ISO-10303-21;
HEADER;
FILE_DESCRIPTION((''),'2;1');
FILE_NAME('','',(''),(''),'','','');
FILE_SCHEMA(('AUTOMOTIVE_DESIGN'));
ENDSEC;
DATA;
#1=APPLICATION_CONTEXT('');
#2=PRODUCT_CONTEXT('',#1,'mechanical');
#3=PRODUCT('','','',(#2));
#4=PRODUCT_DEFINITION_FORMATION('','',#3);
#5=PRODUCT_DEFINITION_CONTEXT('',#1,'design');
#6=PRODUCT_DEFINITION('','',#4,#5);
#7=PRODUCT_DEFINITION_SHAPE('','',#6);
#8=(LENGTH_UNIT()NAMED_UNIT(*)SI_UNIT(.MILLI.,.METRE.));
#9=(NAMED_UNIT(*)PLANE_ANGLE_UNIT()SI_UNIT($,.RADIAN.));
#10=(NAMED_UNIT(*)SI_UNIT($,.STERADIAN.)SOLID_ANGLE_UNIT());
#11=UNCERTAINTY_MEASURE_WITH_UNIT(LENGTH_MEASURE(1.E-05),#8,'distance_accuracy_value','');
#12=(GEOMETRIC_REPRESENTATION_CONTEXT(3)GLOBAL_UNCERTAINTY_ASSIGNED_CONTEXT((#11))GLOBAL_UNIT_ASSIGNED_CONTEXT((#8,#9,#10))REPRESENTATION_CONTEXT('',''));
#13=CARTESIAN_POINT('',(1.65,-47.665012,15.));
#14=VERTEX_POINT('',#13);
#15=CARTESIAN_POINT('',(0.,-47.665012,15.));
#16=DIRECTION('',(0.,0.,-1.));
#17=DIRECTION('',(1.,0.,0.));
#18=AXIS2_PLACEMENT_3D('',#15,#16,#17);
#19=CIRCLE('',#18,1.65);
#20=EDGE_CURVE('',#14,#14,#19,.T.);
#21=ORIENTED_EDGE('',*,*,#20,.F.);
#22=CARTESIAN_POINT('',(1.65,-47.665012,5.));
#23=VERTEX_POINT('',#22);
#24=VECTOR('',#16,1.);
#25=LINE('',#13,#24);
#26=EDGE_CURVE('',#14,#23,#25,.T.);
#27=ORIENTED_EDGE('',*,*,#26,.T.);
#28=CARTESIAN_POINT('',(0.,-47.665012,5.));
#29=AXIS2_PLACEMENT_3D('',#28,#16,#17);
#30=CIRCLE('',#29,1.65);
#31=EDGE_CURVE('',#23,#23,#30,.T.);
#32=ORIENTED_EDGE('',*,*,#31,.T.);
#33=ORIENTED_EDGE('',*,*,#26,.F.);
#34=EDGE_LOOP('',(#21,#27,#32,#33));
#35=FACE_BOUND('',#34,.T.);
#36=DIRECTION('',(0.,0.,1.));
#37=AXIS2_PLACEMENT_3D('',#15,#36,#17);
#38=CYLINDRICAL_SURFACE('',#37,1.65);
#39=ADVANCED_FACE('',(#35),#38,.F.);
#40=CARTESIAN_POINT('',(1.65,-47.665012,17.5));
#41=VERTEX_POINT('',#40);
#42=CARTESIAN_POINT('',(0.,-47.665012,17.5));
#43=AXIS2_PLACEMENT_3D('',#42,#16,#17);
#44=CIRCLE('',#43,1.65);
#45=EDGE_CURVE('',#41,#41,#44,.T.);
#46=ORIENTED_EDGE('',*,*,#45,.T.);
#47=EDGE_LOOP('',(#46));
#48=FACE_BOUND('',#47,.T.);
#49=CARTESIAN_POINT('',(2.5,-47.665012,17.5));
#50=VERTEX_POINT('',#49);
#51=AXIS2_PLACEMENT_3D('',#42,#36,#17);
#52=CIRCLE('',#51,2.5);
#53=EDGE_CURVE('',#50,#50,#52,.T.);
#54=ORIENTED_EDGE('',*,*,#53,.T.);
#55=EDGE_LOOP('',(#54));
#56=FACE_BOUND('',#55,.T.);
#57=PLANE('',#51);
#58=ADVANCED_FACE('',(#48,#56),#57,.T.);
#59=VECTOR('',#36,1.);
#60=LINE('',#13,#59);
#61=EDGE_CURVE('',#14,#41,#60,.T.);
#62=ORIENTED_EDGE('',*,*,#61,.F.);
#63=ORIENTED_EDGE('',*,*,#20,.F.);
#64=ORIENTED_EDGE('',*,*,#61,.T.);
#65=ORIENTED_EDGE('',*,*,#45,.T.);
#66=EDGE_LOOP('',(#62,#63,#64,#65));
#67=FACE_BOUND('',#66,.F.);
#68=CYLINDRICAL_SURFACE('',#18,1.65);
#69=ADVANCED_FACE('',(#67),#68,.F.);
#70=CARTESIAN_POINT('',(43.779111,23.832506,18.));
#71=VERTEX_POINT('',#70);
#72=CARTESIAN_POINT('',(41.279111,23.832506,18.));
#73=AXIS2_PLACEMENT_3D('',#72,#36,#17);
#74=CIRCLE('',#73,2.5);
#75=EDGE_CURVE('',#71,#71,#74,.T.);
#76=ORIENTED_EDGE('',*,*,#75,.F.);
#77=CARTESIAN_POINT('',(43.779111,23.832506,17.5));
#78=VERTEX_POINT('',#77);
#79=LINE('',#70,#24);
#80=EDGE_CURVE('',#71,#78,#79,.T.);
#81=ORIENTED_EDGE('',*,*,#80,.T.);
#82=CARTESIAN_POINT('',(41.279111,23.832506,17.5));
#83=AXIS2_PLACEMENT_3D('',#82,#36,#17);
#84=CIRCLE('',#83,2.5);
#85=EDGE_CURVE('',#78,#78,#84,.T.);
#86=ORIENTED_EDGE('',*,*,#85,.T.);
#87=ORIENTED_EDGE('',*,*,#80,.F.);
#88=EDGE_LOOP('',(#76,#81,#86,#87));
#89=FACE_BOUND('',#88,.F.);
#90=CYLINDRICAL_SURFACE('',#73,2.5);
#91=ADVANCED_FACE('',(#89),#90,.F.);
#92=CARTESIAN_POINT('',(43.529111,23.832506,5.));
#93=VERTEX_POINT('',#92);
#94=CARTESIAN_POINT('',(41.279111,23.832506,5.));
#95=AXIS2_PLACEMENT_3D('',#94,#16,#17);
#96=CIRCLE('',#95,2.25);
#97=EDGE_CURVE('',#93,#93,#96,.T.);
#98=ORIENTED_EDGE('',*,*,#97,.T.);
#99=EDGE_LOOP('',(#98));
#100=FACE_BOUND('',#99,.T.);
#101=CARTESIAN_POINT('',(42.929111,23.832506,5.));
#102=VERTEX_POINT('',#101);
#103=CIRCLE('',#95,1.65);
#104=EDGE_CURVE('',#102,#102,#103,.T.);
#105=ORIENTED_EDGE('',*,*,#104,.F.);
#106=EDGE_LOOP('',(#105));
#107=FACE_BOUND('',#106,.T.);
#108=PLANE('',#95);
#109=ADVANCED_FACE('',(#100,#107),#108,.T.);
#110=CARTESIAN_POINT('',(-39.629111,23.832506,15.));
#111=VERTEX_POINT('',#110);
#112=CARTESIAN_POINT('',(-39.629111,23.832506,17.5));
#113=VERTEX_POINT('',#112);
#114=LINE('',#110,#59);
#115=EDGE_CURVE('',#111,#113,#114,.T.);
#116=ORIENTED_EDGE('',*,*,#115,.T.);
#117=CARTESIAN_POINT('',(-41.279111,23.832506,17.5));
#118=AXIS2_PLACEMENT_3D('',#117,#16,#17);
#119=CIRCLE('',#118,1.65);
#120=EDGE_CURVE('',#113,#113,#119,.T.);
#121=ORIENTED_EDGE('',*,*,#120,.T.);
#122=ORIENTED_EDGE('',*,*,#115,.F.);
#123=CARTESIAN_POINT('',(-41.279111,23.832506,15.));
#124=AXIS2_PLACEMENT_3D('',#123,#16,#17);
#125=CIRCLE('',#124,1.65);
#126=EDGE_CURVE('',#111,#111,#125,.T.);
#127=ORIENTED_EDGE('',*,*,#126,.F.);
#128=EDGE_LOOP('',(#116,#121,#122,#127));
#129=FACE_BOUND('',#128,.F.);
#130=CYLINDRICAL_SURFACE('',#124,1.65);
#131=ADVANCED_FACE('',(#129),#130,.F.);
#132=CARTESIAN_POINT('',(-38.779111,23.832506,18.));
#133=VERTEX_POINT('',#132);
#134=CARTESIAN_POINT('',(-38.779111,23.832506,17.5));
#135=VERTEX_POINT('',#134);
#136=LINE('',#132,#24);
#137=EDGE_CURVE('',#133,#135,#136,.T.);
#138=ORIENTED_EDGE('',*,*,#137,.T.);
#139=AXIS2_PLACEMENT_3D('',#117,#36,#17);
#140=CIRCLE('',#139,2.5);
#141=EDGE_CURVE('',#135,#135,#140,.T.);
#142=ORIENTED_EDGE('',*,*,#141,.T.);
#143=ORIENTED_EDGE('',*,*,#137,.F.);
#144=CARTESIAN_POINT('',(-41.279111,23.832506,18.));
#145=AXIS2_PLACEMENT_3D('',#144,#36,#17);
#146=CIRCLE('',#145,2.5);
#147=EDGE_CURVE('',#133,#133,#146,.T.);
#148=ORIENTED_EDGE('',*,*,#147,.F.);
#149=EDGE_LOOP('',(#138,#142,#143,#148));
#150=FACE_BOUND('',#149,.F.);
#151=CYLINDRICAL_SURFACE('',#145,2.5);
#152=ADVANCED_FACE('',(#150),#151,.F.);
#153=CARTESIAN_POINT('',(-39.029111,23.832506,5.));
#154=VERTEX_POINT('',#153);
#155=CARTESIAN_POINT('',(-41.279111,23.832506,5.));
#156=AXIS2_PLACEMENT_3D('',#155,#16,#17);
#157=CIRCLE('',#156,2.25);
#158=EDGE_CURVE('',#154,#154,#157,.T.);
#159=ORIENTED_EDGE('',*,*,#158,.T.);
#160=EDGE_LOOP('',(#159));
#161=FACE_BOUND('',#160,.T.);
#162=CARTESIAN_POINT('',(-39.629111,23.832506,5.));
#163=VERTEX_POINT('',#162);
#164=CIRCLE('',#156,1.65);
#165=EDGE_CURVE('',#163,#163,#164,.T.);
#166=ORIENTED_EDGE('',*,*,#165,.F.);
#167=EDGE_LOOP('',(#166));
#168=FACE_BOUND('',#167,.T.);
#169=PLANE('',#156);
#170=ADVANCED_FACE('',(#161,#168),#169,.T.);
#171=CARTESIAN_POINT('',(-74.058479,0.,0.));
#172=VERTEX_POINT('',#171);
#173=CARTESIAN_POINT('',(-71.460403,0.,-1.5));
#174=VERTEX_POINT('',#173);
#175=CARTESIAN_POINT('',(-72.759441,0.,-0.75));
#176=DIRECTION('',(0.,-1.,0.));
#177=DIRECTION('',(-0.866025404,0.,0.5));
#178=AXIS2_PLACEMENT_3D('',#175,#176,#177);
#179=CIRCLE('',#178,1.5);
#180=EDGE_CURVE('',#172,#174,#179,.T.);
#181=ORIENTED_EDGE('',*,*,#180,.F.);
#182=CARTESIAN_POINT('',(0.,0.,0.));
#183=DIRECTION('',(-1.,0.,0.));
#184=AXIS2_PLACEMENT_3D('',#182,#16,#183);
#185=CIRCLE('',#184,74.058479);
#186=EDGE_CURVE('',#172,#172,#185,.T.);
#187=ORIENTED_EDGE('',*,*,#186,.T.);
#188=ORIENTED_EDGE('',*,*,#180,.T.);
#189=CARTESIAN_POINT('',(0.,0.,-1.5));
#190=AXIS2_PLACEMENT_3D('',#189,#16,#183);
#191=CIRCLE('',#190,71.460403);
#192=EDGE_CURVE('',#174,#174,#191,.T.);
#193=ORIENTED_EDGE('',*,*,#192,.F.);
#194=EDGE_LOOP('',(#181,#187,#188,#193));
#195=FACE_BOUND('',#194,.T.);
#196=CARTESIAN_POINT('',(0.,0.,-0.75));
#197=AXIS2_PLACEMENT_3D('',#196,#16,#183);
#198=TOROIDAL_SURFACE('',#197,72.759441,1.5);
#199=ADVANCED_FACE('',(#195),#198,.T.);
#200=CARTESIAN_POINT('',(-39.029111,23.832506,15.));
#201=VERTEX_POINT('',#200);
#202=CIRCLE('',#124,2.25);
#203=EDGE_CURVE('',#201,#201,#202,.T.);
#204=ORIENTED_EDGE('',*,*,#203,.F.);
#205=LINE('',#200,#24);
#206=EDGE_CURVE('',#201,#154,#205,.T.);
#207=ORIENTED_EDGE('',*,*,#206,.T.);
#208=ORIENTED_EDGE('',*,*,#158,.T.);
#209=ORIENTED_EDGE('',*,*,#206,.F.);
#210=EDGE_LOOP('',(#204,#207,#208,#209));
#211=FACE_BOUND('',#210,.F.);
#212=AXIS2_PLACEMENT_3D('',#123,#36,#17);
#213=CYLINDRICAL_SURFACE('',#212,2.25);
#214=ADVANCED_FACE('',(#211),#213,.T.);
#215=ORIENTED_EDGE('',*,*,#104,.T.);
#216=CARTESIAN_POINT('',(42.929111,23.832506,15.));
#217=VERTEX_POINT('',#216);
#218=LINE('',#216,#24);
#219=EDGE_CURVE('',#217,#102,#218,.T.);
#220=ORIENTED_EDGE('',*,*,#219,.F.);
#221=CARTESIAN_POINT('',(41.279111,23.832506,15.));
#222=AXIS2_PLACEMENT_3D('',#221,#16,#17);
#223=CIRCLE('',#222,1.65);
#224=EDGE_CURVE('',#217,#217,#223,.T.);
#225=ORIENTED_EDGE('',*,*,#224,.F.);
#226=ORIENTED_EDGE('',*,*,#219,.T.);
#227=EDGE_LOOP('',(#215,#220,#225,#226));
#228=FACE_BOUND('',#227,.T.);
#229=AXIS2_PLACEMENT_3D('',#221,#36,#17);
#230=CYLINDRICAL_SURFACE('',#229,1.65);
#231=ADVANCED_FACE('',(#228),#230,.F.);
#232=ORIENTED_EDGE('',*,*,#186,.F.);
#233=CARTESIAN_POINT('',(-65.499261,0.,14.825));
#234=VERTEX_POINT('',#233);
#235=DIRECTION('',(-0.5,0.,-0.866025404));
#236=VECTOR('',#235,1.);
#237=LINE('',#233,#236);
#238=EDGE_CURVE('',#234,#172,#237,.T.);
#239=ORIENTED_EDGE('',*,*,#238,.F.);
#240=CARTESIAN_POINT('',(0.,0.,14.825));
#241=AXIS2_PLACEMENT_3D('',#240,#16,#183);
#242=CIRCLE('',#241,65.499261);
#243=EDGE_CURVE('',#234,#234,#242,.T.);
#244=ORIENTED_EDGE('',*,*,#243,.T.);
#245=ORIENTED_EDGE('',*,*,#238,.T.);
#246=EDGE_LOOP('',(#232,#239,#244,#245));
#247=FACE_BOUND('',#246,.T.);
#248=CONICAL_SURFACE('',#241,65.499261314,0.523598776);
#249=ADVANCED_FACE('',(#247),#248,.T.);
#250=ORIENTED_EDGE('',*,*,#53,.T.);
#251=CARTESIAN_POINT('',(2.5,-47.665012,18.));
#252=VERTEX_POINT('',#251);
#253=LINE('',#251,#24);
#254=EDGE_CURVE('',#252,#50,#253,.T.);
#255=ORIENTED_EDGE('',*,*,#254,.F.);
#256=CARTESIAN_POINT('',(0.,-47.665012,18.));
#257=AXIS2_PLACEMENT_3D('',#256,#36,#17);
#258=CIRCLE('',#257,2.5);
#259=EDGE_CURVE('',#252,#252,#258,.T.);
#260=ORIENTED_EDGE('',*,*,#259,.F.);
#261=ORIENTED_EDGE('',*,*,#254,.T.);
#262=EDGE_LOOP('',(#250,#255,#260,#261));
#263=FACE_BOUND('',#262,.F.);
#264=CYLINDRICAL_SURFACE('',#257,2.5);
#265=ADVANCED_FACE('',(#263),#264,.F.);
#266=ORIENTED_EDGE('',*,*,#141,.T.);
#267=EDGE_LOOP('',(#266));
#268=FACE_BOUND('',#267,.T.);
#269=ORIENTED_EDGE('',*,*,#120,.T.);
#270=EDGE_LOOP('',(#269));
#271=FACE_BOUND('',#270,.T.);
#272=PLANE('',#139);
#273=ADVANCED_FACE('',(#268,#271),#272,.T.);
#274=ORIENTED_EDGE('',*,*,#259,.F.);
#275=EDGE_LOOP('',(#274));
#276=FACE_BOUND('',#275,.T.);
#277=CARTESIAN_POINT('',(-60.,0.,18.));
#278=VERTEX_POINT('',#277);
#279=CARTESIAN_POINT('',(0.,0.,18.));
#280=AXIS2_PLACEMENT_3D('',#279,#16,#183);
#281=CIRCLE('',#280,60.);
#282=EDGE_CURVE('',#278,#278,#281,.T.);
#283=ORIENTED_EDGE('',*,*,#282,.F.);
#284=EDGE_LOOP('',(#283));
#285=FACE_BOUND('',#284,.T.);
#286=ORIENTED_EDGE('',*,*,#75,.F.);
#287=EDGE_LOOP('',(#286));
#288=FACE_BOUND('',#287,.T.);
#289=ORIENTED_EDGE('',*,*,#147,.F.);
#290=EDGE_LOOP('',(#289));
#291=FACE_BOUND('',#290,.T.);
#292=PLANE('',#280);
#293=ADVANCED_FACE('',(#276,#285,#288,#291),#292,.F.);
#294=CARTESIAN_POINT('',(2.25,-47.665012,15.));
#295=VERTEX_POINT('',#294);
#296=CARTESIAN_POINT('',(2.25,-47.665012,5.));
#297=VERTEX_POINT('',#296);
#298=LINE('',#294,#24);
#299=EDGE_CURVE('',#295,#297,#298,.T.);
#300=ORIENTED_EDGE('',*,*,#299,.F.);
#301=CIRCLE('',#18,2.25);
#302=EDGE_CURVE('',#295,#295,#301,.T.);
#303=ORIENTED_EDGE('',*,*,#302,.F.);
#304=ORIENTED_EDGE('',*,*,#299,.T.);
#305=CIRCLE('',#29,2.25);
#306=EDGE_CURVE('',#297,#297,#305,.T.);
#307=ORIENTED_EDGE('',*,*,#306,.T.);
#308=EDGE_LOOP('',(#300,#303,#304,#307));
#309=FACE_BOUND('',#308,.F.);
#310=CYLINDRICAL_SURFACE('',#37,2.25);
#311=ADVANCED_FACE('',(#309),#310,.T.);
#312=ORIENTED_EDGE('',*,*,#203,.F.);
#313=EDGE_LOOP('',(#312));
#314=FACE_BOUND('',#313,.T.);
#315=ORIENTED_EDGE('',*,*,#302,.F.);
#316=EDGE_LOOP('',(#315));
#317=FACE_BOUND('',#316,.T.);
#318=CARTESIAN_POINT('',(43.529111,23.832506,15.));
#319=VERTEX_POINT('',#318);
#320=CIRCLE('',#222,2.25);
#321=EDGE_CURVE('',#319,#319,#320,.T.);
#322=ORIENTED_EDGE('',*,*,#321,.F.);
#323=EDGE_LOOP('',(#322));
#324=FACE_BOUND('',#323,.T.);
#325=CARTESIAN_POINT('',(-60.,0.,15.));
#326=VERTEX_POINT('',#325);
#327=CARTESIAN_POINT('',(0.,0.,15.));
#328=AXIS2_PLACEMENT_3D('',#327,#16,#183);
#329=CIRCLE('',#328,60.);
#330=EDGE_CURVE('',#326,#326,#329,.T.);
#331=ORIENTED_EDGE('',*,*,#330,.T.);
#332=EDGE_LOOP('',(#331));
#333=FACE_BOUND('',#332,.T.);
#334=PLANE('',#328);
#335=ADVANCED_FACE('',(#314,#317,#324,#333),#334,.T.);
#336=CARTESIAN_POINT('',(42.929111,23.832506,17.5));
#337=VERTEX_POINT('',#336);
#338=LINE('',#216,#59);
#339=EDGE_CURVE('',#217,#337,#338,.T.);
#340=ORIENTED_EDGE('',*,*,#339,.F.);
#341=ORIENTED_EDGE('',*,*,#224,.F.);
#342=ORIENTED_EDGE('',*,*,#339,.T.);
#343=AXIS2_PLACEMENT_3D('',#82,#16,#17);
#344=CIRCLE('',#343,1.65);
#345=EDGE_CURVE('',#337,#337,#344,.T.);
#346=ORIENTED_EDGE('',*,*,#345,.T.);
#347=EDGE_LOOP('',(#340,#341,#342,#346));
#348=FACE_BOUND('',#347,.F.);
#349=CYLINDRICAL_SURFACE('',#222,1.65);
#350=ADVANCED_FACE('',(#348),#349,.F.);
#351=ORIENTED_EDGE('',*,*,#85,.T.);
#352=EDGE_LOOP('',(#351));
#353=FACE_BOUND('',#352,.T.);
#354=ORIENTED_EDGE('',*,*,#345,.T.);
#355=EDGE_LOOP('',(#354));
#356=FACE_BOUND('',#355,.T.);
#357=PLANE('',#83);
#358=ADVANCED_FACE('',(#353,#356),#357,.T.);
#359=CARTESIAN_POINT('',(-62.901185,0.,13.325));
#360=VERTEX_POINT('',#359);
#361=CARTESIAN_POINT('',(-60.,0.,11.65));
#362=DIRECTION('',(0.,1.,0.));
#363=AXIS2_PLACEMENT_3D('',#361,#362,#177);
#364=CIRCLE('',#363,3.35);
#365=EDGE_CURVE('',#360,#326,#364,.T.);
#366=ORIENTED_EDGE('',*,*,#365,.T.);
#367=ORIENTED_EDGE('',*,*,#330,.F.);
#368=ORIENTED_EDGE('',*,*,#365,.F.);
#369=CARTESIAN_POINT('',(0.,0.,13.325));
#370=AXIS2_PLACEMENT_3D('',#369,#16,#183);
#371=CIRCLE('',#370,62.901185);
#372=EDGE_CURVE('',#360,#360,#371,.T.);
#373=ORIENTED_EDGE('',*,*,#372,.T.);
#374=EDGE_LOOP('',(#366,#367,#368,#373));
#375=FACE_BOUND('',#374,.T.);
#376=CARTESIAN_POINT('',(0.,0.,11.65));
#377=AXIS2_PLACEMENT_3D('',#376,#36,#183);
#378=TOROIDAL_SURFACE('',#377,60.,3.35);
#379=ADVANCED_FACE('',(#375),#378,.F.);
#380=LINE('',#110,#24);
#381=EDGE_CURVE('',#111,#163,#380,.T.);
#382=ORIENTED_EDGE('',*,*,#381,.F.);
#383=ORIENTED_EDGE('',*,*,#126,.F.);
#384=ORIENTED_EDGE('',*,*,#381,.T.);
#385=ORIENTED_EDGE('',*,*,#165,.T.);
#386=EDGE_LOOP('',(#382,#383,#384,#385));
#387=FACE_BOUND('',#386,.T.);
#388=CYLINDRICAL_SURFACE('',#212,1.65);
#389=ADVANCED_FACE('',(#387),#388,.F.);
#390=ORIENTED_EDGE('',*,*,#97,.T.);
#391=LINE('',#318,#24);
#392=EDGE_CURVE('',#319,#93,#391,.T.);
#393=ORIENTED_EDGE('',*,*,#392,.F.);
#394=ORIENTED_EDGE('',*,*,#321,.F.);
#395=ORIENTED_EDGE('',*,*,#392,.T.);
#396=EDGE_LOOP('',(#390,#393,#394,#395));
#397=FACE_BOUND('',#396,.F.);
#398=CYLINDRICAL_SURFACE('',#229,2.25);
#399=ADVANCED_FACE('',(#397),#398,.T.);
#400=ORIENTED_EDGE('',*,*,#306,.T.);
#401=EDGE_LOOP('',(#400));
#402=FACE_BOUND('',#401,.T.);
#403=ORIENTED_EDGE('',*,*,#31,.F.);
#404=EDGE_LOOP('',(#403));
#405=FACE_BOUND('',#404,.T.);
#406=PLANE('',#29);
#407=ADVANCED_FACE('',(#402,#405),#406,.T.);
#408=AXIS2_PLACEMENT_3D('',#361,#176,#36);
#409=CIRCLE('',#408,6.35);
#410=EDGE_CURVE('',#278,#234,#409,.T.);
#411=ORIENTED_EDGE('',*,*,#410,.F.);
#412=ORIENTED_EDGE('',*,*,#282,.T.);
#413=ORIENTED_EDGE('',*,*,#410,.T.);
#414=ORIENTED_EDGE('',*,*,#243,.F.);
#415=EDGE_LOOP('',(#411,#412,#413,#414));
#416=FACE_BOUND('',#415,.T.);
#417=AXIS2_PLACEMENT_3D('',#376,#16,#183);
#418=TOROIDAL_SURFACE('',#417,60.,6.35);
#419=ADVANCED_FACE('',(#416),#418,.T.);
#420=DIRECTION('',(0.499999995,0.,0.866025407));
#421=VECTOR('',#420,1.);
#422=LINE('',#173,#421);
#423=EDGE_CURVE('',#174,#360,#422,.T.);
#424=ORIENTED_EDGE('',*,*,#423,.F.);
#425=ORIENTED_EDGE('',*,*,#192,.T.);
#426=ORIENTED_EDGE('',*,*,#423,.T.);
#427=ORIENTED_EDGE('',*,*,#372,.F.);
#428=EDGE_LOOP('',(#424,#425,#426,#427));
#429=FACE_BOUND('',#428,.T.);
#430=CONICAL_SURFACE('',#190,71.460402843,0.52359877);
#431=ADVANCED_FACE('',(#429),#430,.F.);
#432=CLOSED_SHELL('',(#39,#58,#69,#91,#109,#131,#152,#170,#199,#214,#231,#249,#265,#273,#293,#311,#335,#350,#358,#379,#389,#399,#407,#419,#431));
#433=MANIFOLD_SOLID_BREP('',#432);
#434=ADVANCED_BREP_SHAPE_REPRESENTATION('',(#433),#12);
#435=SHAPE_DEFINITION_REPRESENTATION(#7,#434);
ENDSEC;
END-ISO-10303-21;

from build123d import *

# Parameters (mm, degrees)
F2_R     = 2.25
F2_R_2   = 1.65
F3_DEPTH = 10
F4_R     = 1.65
F5_DEPTH = 3
F6_R     = 2.5
F7_DEPTH = 0.5


# Not quite as in the source:
# - ends of sketch curves that miss each other by under 0.0002 mm in the source are joined


with BuildPart() as f1:
    # F0 (on Front) → F1 (revolve)
    with BuildSketch(Plane.XZ):
        with BuildLine():
            Line((0, 15.0000001043), (0, 18))
            Line((0, 18), (-60, 18))
            ThreePointArc((-60, 18), (-63.175, 17.149261314), (-65.499261314, 14.825))
            Line((-65.499261314, 14.825), (-74.0584790548, 0))
            ThreePointArc((-74.0584790548, 0), (-73.5094409491, -2.0490381057), (-71.4604028434, -1.5))
            Line((-71.4604028434, -1.5), (-62.901185193, 13.3250000522))
            ThreePointArc((-62.901185193, 13.3250000522), (-61.6750000522, 14.551185193), (-60, 15.0000001043))
            Line((-60, 15.0000001043), (0, 15.0000001043))
        make_face()
    revolve(axis=Axis((0, 0, 16.5000000522), (0, 0, -1)))

    # F2 (on face) → F3 (join)
    with BuildSketch(Plane(origin=(0, 0, 15.0000001043), x_dir=(1, 0, 0), z_dir=(0, 0, -1))):
        with Locations((0, 47.6650122409)):
            Circle(F2_R)
        with Locations((0, 47.6650122409)):
            Circle(F2_R_2, mode=Mode.SUBTRACT)
        with Locations((-41.2791114723, -23.8325061204)):
            Circle(F2_R)
        with Locations((-41.2791114723, -23.8325061204)):
            Circle(F2_R_2, mode=Mode.SUBTRACT)
        with Locations((41.2791114723, -23.8325061204)):
            Circle(F2_R)
        with Locations((41.2791114723, -23.8325061204)):
            Circle(F2_R_2, mode=Mode.SUBTRACT)
    extrude(amount=F3_DEPTH)

    # F4 (on face) → F5 (cut)
    with BuildSketch(Plane(origin=(0, 0, 15.0000001043), x_dir=(1, 0, 0), z_dir=(0, 0, -1))):
        with Locations((0, 47.6650122409)):
            Circle(F4_R)
        with Locations((-41.2791114723, -23.8325061204)):
            Circle(F4_R)
        with Locations((41.2791114723, -23.8325061204)):
            Circle(F4_R)
    extrude(amount=-F5_DEPTH, mode=Mode.SUBTRACT)

    # F6 (on face) → F7 (cut)
    with BuildSketch(Plane.XY.offset(18)):
        with Locations((0, -47.6650122409)):
            Circle(F6_R)
        with Locations((41.2791114723, 23.8325061204)):
            Circle(F6_R)
        with Locations((-41.2791114723, 23.8325061204)):
            Circle(F6_R)
    extrude(amount=-F7_DEPTH, mode=Mode.SUBTRACT)


solid = f1.part
